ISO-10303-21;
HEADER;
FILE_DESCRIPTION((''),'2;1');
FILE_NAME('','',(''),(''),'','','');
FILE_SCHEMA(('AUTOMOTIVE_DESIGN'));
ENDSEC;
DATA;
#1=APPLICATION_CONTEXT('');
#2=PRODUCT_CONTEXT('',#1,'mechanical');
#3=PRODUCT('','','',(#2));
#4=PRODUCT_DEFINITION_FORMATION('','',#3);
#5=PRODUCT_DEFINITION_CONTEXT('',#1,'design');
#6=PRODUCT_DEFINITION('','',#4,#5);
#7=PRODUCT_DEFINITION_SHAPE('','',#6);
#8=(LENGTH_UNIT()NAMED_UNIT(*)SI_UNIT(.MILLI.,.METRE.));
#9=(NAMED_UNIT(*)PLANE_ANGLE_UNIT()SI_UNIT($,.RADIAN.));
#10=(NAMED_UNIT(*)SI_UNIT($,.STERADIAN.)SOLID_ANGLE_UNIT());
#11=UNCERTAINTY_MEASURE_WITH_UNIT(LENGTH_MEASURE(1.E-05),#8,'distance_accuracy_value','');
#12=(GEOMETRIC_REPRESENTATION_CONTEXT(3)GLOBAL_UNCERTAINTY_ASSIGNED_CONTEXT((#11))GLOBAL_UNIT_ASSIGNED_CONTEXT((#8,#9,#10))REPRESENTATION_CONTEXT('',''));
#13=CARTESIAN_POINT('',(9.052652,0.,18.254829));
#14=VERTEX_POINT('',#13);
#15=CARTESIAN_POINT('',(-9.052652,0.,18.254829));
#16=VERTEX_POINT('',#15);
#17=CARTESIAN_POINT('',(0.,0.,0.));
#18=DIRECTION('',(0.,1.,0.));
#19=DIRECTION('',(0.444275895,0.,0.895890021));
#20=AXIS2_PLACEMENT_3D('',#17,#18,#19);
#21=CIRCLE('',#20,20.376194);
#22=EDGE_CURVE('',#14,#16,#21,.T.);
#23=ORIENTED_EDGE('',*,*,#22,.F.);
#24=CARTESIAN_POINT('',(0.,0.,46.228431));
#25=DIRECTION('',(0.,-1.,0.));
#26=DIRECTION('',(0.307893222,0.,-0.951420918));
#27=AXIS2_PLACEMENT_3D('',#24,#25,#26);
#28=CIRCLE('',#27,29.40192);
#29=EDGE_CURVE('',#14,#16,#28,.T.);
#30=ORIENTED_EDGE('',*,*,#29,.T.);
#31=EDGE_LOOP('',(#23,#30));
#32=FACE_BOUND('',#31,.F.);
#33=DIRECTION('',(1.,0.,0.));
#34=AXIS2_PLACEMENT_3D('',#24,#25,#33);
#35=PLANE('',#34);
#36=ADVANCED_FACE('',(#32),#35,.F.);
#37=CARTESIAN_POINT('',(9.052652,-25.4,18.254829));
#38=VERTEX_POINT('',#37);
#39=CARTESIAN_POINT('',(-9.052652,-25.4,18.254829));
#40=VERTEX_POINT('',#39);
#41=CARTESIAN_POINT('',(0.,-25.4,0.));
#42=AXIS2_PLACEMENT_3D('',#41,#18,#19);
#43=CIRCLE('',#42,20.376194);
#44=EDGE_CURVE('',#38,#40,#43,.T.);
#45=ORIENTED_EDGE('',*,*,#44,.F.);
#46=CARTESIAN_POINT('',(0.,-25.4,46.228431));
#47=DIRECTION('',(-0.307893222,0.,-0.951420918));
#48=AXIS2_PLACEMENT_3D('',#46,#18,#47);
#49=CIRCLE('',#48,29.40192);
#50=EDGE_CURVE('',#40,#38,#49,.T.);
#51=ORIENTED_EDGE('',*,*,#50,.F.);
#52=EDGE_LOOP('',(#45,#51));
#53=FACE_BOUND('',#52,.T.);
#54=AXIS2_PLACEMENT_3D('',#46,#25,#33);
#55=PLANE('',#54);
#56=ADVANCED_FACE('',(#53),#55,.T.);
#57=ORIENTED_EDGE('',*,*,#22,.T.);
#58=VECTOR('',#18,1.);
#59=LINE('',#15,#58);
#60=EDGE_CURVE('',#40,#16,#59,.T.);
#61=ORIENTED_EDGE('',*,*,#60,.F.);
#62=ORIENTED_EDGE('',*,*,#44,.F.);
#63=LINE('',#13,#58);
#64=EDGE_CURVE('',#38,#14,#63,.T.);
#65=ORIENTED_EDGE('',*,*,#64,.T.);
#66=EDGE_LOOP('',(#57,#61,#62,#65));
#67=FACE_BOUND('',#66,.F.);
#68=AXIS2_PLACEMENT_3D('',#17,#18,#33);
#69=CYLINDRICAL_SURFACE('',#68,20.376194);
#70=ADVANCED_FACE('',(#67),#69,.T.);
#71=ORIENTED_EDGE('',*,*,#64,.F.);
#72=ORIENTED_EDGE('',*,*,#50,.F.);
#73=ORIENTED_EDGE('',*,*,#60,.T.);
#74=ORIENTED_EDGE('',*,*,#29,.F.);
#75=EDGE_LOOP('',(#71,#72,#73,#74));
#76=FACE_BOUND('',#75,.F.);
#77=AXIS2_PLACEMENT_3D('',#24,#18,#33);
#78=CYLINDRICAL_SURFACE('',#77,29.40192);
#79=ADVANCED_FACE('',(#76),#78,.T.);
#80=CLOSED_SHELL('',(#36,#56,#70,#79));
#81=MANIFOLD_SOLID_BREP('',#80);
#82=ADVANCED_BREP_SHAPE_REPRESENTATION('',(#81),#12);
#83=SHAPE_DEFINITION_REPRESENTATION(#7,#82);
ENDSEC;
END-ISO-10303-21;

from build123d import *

# Parameters (mm, degrees)
F0_R     = 20.3761943404
F1_DEPTH = 25.4
F2_R     = 29.4019202889
F3_DEPTH = 25.4


# Not quite as in the source:
# - the program builds the solid bodies; features that only make, move or delete a surface that nothing else refers to are left out


with BuildPart() as f1:
    # F0 (on Front) → F1 (new body)
    with BuildSketch(Plane.XZ):
        Circle(F0_R)
    extrude(amount=F1_DEPTH)

    # F2 (on Front) → F3 (join)
    with BuildSketch(Plane.XZ):
        with Locations((0, 46.2284311652)):
            Circle(F2_R)
    extrude(amount=F3_DEPTH)


solid = f1.part
